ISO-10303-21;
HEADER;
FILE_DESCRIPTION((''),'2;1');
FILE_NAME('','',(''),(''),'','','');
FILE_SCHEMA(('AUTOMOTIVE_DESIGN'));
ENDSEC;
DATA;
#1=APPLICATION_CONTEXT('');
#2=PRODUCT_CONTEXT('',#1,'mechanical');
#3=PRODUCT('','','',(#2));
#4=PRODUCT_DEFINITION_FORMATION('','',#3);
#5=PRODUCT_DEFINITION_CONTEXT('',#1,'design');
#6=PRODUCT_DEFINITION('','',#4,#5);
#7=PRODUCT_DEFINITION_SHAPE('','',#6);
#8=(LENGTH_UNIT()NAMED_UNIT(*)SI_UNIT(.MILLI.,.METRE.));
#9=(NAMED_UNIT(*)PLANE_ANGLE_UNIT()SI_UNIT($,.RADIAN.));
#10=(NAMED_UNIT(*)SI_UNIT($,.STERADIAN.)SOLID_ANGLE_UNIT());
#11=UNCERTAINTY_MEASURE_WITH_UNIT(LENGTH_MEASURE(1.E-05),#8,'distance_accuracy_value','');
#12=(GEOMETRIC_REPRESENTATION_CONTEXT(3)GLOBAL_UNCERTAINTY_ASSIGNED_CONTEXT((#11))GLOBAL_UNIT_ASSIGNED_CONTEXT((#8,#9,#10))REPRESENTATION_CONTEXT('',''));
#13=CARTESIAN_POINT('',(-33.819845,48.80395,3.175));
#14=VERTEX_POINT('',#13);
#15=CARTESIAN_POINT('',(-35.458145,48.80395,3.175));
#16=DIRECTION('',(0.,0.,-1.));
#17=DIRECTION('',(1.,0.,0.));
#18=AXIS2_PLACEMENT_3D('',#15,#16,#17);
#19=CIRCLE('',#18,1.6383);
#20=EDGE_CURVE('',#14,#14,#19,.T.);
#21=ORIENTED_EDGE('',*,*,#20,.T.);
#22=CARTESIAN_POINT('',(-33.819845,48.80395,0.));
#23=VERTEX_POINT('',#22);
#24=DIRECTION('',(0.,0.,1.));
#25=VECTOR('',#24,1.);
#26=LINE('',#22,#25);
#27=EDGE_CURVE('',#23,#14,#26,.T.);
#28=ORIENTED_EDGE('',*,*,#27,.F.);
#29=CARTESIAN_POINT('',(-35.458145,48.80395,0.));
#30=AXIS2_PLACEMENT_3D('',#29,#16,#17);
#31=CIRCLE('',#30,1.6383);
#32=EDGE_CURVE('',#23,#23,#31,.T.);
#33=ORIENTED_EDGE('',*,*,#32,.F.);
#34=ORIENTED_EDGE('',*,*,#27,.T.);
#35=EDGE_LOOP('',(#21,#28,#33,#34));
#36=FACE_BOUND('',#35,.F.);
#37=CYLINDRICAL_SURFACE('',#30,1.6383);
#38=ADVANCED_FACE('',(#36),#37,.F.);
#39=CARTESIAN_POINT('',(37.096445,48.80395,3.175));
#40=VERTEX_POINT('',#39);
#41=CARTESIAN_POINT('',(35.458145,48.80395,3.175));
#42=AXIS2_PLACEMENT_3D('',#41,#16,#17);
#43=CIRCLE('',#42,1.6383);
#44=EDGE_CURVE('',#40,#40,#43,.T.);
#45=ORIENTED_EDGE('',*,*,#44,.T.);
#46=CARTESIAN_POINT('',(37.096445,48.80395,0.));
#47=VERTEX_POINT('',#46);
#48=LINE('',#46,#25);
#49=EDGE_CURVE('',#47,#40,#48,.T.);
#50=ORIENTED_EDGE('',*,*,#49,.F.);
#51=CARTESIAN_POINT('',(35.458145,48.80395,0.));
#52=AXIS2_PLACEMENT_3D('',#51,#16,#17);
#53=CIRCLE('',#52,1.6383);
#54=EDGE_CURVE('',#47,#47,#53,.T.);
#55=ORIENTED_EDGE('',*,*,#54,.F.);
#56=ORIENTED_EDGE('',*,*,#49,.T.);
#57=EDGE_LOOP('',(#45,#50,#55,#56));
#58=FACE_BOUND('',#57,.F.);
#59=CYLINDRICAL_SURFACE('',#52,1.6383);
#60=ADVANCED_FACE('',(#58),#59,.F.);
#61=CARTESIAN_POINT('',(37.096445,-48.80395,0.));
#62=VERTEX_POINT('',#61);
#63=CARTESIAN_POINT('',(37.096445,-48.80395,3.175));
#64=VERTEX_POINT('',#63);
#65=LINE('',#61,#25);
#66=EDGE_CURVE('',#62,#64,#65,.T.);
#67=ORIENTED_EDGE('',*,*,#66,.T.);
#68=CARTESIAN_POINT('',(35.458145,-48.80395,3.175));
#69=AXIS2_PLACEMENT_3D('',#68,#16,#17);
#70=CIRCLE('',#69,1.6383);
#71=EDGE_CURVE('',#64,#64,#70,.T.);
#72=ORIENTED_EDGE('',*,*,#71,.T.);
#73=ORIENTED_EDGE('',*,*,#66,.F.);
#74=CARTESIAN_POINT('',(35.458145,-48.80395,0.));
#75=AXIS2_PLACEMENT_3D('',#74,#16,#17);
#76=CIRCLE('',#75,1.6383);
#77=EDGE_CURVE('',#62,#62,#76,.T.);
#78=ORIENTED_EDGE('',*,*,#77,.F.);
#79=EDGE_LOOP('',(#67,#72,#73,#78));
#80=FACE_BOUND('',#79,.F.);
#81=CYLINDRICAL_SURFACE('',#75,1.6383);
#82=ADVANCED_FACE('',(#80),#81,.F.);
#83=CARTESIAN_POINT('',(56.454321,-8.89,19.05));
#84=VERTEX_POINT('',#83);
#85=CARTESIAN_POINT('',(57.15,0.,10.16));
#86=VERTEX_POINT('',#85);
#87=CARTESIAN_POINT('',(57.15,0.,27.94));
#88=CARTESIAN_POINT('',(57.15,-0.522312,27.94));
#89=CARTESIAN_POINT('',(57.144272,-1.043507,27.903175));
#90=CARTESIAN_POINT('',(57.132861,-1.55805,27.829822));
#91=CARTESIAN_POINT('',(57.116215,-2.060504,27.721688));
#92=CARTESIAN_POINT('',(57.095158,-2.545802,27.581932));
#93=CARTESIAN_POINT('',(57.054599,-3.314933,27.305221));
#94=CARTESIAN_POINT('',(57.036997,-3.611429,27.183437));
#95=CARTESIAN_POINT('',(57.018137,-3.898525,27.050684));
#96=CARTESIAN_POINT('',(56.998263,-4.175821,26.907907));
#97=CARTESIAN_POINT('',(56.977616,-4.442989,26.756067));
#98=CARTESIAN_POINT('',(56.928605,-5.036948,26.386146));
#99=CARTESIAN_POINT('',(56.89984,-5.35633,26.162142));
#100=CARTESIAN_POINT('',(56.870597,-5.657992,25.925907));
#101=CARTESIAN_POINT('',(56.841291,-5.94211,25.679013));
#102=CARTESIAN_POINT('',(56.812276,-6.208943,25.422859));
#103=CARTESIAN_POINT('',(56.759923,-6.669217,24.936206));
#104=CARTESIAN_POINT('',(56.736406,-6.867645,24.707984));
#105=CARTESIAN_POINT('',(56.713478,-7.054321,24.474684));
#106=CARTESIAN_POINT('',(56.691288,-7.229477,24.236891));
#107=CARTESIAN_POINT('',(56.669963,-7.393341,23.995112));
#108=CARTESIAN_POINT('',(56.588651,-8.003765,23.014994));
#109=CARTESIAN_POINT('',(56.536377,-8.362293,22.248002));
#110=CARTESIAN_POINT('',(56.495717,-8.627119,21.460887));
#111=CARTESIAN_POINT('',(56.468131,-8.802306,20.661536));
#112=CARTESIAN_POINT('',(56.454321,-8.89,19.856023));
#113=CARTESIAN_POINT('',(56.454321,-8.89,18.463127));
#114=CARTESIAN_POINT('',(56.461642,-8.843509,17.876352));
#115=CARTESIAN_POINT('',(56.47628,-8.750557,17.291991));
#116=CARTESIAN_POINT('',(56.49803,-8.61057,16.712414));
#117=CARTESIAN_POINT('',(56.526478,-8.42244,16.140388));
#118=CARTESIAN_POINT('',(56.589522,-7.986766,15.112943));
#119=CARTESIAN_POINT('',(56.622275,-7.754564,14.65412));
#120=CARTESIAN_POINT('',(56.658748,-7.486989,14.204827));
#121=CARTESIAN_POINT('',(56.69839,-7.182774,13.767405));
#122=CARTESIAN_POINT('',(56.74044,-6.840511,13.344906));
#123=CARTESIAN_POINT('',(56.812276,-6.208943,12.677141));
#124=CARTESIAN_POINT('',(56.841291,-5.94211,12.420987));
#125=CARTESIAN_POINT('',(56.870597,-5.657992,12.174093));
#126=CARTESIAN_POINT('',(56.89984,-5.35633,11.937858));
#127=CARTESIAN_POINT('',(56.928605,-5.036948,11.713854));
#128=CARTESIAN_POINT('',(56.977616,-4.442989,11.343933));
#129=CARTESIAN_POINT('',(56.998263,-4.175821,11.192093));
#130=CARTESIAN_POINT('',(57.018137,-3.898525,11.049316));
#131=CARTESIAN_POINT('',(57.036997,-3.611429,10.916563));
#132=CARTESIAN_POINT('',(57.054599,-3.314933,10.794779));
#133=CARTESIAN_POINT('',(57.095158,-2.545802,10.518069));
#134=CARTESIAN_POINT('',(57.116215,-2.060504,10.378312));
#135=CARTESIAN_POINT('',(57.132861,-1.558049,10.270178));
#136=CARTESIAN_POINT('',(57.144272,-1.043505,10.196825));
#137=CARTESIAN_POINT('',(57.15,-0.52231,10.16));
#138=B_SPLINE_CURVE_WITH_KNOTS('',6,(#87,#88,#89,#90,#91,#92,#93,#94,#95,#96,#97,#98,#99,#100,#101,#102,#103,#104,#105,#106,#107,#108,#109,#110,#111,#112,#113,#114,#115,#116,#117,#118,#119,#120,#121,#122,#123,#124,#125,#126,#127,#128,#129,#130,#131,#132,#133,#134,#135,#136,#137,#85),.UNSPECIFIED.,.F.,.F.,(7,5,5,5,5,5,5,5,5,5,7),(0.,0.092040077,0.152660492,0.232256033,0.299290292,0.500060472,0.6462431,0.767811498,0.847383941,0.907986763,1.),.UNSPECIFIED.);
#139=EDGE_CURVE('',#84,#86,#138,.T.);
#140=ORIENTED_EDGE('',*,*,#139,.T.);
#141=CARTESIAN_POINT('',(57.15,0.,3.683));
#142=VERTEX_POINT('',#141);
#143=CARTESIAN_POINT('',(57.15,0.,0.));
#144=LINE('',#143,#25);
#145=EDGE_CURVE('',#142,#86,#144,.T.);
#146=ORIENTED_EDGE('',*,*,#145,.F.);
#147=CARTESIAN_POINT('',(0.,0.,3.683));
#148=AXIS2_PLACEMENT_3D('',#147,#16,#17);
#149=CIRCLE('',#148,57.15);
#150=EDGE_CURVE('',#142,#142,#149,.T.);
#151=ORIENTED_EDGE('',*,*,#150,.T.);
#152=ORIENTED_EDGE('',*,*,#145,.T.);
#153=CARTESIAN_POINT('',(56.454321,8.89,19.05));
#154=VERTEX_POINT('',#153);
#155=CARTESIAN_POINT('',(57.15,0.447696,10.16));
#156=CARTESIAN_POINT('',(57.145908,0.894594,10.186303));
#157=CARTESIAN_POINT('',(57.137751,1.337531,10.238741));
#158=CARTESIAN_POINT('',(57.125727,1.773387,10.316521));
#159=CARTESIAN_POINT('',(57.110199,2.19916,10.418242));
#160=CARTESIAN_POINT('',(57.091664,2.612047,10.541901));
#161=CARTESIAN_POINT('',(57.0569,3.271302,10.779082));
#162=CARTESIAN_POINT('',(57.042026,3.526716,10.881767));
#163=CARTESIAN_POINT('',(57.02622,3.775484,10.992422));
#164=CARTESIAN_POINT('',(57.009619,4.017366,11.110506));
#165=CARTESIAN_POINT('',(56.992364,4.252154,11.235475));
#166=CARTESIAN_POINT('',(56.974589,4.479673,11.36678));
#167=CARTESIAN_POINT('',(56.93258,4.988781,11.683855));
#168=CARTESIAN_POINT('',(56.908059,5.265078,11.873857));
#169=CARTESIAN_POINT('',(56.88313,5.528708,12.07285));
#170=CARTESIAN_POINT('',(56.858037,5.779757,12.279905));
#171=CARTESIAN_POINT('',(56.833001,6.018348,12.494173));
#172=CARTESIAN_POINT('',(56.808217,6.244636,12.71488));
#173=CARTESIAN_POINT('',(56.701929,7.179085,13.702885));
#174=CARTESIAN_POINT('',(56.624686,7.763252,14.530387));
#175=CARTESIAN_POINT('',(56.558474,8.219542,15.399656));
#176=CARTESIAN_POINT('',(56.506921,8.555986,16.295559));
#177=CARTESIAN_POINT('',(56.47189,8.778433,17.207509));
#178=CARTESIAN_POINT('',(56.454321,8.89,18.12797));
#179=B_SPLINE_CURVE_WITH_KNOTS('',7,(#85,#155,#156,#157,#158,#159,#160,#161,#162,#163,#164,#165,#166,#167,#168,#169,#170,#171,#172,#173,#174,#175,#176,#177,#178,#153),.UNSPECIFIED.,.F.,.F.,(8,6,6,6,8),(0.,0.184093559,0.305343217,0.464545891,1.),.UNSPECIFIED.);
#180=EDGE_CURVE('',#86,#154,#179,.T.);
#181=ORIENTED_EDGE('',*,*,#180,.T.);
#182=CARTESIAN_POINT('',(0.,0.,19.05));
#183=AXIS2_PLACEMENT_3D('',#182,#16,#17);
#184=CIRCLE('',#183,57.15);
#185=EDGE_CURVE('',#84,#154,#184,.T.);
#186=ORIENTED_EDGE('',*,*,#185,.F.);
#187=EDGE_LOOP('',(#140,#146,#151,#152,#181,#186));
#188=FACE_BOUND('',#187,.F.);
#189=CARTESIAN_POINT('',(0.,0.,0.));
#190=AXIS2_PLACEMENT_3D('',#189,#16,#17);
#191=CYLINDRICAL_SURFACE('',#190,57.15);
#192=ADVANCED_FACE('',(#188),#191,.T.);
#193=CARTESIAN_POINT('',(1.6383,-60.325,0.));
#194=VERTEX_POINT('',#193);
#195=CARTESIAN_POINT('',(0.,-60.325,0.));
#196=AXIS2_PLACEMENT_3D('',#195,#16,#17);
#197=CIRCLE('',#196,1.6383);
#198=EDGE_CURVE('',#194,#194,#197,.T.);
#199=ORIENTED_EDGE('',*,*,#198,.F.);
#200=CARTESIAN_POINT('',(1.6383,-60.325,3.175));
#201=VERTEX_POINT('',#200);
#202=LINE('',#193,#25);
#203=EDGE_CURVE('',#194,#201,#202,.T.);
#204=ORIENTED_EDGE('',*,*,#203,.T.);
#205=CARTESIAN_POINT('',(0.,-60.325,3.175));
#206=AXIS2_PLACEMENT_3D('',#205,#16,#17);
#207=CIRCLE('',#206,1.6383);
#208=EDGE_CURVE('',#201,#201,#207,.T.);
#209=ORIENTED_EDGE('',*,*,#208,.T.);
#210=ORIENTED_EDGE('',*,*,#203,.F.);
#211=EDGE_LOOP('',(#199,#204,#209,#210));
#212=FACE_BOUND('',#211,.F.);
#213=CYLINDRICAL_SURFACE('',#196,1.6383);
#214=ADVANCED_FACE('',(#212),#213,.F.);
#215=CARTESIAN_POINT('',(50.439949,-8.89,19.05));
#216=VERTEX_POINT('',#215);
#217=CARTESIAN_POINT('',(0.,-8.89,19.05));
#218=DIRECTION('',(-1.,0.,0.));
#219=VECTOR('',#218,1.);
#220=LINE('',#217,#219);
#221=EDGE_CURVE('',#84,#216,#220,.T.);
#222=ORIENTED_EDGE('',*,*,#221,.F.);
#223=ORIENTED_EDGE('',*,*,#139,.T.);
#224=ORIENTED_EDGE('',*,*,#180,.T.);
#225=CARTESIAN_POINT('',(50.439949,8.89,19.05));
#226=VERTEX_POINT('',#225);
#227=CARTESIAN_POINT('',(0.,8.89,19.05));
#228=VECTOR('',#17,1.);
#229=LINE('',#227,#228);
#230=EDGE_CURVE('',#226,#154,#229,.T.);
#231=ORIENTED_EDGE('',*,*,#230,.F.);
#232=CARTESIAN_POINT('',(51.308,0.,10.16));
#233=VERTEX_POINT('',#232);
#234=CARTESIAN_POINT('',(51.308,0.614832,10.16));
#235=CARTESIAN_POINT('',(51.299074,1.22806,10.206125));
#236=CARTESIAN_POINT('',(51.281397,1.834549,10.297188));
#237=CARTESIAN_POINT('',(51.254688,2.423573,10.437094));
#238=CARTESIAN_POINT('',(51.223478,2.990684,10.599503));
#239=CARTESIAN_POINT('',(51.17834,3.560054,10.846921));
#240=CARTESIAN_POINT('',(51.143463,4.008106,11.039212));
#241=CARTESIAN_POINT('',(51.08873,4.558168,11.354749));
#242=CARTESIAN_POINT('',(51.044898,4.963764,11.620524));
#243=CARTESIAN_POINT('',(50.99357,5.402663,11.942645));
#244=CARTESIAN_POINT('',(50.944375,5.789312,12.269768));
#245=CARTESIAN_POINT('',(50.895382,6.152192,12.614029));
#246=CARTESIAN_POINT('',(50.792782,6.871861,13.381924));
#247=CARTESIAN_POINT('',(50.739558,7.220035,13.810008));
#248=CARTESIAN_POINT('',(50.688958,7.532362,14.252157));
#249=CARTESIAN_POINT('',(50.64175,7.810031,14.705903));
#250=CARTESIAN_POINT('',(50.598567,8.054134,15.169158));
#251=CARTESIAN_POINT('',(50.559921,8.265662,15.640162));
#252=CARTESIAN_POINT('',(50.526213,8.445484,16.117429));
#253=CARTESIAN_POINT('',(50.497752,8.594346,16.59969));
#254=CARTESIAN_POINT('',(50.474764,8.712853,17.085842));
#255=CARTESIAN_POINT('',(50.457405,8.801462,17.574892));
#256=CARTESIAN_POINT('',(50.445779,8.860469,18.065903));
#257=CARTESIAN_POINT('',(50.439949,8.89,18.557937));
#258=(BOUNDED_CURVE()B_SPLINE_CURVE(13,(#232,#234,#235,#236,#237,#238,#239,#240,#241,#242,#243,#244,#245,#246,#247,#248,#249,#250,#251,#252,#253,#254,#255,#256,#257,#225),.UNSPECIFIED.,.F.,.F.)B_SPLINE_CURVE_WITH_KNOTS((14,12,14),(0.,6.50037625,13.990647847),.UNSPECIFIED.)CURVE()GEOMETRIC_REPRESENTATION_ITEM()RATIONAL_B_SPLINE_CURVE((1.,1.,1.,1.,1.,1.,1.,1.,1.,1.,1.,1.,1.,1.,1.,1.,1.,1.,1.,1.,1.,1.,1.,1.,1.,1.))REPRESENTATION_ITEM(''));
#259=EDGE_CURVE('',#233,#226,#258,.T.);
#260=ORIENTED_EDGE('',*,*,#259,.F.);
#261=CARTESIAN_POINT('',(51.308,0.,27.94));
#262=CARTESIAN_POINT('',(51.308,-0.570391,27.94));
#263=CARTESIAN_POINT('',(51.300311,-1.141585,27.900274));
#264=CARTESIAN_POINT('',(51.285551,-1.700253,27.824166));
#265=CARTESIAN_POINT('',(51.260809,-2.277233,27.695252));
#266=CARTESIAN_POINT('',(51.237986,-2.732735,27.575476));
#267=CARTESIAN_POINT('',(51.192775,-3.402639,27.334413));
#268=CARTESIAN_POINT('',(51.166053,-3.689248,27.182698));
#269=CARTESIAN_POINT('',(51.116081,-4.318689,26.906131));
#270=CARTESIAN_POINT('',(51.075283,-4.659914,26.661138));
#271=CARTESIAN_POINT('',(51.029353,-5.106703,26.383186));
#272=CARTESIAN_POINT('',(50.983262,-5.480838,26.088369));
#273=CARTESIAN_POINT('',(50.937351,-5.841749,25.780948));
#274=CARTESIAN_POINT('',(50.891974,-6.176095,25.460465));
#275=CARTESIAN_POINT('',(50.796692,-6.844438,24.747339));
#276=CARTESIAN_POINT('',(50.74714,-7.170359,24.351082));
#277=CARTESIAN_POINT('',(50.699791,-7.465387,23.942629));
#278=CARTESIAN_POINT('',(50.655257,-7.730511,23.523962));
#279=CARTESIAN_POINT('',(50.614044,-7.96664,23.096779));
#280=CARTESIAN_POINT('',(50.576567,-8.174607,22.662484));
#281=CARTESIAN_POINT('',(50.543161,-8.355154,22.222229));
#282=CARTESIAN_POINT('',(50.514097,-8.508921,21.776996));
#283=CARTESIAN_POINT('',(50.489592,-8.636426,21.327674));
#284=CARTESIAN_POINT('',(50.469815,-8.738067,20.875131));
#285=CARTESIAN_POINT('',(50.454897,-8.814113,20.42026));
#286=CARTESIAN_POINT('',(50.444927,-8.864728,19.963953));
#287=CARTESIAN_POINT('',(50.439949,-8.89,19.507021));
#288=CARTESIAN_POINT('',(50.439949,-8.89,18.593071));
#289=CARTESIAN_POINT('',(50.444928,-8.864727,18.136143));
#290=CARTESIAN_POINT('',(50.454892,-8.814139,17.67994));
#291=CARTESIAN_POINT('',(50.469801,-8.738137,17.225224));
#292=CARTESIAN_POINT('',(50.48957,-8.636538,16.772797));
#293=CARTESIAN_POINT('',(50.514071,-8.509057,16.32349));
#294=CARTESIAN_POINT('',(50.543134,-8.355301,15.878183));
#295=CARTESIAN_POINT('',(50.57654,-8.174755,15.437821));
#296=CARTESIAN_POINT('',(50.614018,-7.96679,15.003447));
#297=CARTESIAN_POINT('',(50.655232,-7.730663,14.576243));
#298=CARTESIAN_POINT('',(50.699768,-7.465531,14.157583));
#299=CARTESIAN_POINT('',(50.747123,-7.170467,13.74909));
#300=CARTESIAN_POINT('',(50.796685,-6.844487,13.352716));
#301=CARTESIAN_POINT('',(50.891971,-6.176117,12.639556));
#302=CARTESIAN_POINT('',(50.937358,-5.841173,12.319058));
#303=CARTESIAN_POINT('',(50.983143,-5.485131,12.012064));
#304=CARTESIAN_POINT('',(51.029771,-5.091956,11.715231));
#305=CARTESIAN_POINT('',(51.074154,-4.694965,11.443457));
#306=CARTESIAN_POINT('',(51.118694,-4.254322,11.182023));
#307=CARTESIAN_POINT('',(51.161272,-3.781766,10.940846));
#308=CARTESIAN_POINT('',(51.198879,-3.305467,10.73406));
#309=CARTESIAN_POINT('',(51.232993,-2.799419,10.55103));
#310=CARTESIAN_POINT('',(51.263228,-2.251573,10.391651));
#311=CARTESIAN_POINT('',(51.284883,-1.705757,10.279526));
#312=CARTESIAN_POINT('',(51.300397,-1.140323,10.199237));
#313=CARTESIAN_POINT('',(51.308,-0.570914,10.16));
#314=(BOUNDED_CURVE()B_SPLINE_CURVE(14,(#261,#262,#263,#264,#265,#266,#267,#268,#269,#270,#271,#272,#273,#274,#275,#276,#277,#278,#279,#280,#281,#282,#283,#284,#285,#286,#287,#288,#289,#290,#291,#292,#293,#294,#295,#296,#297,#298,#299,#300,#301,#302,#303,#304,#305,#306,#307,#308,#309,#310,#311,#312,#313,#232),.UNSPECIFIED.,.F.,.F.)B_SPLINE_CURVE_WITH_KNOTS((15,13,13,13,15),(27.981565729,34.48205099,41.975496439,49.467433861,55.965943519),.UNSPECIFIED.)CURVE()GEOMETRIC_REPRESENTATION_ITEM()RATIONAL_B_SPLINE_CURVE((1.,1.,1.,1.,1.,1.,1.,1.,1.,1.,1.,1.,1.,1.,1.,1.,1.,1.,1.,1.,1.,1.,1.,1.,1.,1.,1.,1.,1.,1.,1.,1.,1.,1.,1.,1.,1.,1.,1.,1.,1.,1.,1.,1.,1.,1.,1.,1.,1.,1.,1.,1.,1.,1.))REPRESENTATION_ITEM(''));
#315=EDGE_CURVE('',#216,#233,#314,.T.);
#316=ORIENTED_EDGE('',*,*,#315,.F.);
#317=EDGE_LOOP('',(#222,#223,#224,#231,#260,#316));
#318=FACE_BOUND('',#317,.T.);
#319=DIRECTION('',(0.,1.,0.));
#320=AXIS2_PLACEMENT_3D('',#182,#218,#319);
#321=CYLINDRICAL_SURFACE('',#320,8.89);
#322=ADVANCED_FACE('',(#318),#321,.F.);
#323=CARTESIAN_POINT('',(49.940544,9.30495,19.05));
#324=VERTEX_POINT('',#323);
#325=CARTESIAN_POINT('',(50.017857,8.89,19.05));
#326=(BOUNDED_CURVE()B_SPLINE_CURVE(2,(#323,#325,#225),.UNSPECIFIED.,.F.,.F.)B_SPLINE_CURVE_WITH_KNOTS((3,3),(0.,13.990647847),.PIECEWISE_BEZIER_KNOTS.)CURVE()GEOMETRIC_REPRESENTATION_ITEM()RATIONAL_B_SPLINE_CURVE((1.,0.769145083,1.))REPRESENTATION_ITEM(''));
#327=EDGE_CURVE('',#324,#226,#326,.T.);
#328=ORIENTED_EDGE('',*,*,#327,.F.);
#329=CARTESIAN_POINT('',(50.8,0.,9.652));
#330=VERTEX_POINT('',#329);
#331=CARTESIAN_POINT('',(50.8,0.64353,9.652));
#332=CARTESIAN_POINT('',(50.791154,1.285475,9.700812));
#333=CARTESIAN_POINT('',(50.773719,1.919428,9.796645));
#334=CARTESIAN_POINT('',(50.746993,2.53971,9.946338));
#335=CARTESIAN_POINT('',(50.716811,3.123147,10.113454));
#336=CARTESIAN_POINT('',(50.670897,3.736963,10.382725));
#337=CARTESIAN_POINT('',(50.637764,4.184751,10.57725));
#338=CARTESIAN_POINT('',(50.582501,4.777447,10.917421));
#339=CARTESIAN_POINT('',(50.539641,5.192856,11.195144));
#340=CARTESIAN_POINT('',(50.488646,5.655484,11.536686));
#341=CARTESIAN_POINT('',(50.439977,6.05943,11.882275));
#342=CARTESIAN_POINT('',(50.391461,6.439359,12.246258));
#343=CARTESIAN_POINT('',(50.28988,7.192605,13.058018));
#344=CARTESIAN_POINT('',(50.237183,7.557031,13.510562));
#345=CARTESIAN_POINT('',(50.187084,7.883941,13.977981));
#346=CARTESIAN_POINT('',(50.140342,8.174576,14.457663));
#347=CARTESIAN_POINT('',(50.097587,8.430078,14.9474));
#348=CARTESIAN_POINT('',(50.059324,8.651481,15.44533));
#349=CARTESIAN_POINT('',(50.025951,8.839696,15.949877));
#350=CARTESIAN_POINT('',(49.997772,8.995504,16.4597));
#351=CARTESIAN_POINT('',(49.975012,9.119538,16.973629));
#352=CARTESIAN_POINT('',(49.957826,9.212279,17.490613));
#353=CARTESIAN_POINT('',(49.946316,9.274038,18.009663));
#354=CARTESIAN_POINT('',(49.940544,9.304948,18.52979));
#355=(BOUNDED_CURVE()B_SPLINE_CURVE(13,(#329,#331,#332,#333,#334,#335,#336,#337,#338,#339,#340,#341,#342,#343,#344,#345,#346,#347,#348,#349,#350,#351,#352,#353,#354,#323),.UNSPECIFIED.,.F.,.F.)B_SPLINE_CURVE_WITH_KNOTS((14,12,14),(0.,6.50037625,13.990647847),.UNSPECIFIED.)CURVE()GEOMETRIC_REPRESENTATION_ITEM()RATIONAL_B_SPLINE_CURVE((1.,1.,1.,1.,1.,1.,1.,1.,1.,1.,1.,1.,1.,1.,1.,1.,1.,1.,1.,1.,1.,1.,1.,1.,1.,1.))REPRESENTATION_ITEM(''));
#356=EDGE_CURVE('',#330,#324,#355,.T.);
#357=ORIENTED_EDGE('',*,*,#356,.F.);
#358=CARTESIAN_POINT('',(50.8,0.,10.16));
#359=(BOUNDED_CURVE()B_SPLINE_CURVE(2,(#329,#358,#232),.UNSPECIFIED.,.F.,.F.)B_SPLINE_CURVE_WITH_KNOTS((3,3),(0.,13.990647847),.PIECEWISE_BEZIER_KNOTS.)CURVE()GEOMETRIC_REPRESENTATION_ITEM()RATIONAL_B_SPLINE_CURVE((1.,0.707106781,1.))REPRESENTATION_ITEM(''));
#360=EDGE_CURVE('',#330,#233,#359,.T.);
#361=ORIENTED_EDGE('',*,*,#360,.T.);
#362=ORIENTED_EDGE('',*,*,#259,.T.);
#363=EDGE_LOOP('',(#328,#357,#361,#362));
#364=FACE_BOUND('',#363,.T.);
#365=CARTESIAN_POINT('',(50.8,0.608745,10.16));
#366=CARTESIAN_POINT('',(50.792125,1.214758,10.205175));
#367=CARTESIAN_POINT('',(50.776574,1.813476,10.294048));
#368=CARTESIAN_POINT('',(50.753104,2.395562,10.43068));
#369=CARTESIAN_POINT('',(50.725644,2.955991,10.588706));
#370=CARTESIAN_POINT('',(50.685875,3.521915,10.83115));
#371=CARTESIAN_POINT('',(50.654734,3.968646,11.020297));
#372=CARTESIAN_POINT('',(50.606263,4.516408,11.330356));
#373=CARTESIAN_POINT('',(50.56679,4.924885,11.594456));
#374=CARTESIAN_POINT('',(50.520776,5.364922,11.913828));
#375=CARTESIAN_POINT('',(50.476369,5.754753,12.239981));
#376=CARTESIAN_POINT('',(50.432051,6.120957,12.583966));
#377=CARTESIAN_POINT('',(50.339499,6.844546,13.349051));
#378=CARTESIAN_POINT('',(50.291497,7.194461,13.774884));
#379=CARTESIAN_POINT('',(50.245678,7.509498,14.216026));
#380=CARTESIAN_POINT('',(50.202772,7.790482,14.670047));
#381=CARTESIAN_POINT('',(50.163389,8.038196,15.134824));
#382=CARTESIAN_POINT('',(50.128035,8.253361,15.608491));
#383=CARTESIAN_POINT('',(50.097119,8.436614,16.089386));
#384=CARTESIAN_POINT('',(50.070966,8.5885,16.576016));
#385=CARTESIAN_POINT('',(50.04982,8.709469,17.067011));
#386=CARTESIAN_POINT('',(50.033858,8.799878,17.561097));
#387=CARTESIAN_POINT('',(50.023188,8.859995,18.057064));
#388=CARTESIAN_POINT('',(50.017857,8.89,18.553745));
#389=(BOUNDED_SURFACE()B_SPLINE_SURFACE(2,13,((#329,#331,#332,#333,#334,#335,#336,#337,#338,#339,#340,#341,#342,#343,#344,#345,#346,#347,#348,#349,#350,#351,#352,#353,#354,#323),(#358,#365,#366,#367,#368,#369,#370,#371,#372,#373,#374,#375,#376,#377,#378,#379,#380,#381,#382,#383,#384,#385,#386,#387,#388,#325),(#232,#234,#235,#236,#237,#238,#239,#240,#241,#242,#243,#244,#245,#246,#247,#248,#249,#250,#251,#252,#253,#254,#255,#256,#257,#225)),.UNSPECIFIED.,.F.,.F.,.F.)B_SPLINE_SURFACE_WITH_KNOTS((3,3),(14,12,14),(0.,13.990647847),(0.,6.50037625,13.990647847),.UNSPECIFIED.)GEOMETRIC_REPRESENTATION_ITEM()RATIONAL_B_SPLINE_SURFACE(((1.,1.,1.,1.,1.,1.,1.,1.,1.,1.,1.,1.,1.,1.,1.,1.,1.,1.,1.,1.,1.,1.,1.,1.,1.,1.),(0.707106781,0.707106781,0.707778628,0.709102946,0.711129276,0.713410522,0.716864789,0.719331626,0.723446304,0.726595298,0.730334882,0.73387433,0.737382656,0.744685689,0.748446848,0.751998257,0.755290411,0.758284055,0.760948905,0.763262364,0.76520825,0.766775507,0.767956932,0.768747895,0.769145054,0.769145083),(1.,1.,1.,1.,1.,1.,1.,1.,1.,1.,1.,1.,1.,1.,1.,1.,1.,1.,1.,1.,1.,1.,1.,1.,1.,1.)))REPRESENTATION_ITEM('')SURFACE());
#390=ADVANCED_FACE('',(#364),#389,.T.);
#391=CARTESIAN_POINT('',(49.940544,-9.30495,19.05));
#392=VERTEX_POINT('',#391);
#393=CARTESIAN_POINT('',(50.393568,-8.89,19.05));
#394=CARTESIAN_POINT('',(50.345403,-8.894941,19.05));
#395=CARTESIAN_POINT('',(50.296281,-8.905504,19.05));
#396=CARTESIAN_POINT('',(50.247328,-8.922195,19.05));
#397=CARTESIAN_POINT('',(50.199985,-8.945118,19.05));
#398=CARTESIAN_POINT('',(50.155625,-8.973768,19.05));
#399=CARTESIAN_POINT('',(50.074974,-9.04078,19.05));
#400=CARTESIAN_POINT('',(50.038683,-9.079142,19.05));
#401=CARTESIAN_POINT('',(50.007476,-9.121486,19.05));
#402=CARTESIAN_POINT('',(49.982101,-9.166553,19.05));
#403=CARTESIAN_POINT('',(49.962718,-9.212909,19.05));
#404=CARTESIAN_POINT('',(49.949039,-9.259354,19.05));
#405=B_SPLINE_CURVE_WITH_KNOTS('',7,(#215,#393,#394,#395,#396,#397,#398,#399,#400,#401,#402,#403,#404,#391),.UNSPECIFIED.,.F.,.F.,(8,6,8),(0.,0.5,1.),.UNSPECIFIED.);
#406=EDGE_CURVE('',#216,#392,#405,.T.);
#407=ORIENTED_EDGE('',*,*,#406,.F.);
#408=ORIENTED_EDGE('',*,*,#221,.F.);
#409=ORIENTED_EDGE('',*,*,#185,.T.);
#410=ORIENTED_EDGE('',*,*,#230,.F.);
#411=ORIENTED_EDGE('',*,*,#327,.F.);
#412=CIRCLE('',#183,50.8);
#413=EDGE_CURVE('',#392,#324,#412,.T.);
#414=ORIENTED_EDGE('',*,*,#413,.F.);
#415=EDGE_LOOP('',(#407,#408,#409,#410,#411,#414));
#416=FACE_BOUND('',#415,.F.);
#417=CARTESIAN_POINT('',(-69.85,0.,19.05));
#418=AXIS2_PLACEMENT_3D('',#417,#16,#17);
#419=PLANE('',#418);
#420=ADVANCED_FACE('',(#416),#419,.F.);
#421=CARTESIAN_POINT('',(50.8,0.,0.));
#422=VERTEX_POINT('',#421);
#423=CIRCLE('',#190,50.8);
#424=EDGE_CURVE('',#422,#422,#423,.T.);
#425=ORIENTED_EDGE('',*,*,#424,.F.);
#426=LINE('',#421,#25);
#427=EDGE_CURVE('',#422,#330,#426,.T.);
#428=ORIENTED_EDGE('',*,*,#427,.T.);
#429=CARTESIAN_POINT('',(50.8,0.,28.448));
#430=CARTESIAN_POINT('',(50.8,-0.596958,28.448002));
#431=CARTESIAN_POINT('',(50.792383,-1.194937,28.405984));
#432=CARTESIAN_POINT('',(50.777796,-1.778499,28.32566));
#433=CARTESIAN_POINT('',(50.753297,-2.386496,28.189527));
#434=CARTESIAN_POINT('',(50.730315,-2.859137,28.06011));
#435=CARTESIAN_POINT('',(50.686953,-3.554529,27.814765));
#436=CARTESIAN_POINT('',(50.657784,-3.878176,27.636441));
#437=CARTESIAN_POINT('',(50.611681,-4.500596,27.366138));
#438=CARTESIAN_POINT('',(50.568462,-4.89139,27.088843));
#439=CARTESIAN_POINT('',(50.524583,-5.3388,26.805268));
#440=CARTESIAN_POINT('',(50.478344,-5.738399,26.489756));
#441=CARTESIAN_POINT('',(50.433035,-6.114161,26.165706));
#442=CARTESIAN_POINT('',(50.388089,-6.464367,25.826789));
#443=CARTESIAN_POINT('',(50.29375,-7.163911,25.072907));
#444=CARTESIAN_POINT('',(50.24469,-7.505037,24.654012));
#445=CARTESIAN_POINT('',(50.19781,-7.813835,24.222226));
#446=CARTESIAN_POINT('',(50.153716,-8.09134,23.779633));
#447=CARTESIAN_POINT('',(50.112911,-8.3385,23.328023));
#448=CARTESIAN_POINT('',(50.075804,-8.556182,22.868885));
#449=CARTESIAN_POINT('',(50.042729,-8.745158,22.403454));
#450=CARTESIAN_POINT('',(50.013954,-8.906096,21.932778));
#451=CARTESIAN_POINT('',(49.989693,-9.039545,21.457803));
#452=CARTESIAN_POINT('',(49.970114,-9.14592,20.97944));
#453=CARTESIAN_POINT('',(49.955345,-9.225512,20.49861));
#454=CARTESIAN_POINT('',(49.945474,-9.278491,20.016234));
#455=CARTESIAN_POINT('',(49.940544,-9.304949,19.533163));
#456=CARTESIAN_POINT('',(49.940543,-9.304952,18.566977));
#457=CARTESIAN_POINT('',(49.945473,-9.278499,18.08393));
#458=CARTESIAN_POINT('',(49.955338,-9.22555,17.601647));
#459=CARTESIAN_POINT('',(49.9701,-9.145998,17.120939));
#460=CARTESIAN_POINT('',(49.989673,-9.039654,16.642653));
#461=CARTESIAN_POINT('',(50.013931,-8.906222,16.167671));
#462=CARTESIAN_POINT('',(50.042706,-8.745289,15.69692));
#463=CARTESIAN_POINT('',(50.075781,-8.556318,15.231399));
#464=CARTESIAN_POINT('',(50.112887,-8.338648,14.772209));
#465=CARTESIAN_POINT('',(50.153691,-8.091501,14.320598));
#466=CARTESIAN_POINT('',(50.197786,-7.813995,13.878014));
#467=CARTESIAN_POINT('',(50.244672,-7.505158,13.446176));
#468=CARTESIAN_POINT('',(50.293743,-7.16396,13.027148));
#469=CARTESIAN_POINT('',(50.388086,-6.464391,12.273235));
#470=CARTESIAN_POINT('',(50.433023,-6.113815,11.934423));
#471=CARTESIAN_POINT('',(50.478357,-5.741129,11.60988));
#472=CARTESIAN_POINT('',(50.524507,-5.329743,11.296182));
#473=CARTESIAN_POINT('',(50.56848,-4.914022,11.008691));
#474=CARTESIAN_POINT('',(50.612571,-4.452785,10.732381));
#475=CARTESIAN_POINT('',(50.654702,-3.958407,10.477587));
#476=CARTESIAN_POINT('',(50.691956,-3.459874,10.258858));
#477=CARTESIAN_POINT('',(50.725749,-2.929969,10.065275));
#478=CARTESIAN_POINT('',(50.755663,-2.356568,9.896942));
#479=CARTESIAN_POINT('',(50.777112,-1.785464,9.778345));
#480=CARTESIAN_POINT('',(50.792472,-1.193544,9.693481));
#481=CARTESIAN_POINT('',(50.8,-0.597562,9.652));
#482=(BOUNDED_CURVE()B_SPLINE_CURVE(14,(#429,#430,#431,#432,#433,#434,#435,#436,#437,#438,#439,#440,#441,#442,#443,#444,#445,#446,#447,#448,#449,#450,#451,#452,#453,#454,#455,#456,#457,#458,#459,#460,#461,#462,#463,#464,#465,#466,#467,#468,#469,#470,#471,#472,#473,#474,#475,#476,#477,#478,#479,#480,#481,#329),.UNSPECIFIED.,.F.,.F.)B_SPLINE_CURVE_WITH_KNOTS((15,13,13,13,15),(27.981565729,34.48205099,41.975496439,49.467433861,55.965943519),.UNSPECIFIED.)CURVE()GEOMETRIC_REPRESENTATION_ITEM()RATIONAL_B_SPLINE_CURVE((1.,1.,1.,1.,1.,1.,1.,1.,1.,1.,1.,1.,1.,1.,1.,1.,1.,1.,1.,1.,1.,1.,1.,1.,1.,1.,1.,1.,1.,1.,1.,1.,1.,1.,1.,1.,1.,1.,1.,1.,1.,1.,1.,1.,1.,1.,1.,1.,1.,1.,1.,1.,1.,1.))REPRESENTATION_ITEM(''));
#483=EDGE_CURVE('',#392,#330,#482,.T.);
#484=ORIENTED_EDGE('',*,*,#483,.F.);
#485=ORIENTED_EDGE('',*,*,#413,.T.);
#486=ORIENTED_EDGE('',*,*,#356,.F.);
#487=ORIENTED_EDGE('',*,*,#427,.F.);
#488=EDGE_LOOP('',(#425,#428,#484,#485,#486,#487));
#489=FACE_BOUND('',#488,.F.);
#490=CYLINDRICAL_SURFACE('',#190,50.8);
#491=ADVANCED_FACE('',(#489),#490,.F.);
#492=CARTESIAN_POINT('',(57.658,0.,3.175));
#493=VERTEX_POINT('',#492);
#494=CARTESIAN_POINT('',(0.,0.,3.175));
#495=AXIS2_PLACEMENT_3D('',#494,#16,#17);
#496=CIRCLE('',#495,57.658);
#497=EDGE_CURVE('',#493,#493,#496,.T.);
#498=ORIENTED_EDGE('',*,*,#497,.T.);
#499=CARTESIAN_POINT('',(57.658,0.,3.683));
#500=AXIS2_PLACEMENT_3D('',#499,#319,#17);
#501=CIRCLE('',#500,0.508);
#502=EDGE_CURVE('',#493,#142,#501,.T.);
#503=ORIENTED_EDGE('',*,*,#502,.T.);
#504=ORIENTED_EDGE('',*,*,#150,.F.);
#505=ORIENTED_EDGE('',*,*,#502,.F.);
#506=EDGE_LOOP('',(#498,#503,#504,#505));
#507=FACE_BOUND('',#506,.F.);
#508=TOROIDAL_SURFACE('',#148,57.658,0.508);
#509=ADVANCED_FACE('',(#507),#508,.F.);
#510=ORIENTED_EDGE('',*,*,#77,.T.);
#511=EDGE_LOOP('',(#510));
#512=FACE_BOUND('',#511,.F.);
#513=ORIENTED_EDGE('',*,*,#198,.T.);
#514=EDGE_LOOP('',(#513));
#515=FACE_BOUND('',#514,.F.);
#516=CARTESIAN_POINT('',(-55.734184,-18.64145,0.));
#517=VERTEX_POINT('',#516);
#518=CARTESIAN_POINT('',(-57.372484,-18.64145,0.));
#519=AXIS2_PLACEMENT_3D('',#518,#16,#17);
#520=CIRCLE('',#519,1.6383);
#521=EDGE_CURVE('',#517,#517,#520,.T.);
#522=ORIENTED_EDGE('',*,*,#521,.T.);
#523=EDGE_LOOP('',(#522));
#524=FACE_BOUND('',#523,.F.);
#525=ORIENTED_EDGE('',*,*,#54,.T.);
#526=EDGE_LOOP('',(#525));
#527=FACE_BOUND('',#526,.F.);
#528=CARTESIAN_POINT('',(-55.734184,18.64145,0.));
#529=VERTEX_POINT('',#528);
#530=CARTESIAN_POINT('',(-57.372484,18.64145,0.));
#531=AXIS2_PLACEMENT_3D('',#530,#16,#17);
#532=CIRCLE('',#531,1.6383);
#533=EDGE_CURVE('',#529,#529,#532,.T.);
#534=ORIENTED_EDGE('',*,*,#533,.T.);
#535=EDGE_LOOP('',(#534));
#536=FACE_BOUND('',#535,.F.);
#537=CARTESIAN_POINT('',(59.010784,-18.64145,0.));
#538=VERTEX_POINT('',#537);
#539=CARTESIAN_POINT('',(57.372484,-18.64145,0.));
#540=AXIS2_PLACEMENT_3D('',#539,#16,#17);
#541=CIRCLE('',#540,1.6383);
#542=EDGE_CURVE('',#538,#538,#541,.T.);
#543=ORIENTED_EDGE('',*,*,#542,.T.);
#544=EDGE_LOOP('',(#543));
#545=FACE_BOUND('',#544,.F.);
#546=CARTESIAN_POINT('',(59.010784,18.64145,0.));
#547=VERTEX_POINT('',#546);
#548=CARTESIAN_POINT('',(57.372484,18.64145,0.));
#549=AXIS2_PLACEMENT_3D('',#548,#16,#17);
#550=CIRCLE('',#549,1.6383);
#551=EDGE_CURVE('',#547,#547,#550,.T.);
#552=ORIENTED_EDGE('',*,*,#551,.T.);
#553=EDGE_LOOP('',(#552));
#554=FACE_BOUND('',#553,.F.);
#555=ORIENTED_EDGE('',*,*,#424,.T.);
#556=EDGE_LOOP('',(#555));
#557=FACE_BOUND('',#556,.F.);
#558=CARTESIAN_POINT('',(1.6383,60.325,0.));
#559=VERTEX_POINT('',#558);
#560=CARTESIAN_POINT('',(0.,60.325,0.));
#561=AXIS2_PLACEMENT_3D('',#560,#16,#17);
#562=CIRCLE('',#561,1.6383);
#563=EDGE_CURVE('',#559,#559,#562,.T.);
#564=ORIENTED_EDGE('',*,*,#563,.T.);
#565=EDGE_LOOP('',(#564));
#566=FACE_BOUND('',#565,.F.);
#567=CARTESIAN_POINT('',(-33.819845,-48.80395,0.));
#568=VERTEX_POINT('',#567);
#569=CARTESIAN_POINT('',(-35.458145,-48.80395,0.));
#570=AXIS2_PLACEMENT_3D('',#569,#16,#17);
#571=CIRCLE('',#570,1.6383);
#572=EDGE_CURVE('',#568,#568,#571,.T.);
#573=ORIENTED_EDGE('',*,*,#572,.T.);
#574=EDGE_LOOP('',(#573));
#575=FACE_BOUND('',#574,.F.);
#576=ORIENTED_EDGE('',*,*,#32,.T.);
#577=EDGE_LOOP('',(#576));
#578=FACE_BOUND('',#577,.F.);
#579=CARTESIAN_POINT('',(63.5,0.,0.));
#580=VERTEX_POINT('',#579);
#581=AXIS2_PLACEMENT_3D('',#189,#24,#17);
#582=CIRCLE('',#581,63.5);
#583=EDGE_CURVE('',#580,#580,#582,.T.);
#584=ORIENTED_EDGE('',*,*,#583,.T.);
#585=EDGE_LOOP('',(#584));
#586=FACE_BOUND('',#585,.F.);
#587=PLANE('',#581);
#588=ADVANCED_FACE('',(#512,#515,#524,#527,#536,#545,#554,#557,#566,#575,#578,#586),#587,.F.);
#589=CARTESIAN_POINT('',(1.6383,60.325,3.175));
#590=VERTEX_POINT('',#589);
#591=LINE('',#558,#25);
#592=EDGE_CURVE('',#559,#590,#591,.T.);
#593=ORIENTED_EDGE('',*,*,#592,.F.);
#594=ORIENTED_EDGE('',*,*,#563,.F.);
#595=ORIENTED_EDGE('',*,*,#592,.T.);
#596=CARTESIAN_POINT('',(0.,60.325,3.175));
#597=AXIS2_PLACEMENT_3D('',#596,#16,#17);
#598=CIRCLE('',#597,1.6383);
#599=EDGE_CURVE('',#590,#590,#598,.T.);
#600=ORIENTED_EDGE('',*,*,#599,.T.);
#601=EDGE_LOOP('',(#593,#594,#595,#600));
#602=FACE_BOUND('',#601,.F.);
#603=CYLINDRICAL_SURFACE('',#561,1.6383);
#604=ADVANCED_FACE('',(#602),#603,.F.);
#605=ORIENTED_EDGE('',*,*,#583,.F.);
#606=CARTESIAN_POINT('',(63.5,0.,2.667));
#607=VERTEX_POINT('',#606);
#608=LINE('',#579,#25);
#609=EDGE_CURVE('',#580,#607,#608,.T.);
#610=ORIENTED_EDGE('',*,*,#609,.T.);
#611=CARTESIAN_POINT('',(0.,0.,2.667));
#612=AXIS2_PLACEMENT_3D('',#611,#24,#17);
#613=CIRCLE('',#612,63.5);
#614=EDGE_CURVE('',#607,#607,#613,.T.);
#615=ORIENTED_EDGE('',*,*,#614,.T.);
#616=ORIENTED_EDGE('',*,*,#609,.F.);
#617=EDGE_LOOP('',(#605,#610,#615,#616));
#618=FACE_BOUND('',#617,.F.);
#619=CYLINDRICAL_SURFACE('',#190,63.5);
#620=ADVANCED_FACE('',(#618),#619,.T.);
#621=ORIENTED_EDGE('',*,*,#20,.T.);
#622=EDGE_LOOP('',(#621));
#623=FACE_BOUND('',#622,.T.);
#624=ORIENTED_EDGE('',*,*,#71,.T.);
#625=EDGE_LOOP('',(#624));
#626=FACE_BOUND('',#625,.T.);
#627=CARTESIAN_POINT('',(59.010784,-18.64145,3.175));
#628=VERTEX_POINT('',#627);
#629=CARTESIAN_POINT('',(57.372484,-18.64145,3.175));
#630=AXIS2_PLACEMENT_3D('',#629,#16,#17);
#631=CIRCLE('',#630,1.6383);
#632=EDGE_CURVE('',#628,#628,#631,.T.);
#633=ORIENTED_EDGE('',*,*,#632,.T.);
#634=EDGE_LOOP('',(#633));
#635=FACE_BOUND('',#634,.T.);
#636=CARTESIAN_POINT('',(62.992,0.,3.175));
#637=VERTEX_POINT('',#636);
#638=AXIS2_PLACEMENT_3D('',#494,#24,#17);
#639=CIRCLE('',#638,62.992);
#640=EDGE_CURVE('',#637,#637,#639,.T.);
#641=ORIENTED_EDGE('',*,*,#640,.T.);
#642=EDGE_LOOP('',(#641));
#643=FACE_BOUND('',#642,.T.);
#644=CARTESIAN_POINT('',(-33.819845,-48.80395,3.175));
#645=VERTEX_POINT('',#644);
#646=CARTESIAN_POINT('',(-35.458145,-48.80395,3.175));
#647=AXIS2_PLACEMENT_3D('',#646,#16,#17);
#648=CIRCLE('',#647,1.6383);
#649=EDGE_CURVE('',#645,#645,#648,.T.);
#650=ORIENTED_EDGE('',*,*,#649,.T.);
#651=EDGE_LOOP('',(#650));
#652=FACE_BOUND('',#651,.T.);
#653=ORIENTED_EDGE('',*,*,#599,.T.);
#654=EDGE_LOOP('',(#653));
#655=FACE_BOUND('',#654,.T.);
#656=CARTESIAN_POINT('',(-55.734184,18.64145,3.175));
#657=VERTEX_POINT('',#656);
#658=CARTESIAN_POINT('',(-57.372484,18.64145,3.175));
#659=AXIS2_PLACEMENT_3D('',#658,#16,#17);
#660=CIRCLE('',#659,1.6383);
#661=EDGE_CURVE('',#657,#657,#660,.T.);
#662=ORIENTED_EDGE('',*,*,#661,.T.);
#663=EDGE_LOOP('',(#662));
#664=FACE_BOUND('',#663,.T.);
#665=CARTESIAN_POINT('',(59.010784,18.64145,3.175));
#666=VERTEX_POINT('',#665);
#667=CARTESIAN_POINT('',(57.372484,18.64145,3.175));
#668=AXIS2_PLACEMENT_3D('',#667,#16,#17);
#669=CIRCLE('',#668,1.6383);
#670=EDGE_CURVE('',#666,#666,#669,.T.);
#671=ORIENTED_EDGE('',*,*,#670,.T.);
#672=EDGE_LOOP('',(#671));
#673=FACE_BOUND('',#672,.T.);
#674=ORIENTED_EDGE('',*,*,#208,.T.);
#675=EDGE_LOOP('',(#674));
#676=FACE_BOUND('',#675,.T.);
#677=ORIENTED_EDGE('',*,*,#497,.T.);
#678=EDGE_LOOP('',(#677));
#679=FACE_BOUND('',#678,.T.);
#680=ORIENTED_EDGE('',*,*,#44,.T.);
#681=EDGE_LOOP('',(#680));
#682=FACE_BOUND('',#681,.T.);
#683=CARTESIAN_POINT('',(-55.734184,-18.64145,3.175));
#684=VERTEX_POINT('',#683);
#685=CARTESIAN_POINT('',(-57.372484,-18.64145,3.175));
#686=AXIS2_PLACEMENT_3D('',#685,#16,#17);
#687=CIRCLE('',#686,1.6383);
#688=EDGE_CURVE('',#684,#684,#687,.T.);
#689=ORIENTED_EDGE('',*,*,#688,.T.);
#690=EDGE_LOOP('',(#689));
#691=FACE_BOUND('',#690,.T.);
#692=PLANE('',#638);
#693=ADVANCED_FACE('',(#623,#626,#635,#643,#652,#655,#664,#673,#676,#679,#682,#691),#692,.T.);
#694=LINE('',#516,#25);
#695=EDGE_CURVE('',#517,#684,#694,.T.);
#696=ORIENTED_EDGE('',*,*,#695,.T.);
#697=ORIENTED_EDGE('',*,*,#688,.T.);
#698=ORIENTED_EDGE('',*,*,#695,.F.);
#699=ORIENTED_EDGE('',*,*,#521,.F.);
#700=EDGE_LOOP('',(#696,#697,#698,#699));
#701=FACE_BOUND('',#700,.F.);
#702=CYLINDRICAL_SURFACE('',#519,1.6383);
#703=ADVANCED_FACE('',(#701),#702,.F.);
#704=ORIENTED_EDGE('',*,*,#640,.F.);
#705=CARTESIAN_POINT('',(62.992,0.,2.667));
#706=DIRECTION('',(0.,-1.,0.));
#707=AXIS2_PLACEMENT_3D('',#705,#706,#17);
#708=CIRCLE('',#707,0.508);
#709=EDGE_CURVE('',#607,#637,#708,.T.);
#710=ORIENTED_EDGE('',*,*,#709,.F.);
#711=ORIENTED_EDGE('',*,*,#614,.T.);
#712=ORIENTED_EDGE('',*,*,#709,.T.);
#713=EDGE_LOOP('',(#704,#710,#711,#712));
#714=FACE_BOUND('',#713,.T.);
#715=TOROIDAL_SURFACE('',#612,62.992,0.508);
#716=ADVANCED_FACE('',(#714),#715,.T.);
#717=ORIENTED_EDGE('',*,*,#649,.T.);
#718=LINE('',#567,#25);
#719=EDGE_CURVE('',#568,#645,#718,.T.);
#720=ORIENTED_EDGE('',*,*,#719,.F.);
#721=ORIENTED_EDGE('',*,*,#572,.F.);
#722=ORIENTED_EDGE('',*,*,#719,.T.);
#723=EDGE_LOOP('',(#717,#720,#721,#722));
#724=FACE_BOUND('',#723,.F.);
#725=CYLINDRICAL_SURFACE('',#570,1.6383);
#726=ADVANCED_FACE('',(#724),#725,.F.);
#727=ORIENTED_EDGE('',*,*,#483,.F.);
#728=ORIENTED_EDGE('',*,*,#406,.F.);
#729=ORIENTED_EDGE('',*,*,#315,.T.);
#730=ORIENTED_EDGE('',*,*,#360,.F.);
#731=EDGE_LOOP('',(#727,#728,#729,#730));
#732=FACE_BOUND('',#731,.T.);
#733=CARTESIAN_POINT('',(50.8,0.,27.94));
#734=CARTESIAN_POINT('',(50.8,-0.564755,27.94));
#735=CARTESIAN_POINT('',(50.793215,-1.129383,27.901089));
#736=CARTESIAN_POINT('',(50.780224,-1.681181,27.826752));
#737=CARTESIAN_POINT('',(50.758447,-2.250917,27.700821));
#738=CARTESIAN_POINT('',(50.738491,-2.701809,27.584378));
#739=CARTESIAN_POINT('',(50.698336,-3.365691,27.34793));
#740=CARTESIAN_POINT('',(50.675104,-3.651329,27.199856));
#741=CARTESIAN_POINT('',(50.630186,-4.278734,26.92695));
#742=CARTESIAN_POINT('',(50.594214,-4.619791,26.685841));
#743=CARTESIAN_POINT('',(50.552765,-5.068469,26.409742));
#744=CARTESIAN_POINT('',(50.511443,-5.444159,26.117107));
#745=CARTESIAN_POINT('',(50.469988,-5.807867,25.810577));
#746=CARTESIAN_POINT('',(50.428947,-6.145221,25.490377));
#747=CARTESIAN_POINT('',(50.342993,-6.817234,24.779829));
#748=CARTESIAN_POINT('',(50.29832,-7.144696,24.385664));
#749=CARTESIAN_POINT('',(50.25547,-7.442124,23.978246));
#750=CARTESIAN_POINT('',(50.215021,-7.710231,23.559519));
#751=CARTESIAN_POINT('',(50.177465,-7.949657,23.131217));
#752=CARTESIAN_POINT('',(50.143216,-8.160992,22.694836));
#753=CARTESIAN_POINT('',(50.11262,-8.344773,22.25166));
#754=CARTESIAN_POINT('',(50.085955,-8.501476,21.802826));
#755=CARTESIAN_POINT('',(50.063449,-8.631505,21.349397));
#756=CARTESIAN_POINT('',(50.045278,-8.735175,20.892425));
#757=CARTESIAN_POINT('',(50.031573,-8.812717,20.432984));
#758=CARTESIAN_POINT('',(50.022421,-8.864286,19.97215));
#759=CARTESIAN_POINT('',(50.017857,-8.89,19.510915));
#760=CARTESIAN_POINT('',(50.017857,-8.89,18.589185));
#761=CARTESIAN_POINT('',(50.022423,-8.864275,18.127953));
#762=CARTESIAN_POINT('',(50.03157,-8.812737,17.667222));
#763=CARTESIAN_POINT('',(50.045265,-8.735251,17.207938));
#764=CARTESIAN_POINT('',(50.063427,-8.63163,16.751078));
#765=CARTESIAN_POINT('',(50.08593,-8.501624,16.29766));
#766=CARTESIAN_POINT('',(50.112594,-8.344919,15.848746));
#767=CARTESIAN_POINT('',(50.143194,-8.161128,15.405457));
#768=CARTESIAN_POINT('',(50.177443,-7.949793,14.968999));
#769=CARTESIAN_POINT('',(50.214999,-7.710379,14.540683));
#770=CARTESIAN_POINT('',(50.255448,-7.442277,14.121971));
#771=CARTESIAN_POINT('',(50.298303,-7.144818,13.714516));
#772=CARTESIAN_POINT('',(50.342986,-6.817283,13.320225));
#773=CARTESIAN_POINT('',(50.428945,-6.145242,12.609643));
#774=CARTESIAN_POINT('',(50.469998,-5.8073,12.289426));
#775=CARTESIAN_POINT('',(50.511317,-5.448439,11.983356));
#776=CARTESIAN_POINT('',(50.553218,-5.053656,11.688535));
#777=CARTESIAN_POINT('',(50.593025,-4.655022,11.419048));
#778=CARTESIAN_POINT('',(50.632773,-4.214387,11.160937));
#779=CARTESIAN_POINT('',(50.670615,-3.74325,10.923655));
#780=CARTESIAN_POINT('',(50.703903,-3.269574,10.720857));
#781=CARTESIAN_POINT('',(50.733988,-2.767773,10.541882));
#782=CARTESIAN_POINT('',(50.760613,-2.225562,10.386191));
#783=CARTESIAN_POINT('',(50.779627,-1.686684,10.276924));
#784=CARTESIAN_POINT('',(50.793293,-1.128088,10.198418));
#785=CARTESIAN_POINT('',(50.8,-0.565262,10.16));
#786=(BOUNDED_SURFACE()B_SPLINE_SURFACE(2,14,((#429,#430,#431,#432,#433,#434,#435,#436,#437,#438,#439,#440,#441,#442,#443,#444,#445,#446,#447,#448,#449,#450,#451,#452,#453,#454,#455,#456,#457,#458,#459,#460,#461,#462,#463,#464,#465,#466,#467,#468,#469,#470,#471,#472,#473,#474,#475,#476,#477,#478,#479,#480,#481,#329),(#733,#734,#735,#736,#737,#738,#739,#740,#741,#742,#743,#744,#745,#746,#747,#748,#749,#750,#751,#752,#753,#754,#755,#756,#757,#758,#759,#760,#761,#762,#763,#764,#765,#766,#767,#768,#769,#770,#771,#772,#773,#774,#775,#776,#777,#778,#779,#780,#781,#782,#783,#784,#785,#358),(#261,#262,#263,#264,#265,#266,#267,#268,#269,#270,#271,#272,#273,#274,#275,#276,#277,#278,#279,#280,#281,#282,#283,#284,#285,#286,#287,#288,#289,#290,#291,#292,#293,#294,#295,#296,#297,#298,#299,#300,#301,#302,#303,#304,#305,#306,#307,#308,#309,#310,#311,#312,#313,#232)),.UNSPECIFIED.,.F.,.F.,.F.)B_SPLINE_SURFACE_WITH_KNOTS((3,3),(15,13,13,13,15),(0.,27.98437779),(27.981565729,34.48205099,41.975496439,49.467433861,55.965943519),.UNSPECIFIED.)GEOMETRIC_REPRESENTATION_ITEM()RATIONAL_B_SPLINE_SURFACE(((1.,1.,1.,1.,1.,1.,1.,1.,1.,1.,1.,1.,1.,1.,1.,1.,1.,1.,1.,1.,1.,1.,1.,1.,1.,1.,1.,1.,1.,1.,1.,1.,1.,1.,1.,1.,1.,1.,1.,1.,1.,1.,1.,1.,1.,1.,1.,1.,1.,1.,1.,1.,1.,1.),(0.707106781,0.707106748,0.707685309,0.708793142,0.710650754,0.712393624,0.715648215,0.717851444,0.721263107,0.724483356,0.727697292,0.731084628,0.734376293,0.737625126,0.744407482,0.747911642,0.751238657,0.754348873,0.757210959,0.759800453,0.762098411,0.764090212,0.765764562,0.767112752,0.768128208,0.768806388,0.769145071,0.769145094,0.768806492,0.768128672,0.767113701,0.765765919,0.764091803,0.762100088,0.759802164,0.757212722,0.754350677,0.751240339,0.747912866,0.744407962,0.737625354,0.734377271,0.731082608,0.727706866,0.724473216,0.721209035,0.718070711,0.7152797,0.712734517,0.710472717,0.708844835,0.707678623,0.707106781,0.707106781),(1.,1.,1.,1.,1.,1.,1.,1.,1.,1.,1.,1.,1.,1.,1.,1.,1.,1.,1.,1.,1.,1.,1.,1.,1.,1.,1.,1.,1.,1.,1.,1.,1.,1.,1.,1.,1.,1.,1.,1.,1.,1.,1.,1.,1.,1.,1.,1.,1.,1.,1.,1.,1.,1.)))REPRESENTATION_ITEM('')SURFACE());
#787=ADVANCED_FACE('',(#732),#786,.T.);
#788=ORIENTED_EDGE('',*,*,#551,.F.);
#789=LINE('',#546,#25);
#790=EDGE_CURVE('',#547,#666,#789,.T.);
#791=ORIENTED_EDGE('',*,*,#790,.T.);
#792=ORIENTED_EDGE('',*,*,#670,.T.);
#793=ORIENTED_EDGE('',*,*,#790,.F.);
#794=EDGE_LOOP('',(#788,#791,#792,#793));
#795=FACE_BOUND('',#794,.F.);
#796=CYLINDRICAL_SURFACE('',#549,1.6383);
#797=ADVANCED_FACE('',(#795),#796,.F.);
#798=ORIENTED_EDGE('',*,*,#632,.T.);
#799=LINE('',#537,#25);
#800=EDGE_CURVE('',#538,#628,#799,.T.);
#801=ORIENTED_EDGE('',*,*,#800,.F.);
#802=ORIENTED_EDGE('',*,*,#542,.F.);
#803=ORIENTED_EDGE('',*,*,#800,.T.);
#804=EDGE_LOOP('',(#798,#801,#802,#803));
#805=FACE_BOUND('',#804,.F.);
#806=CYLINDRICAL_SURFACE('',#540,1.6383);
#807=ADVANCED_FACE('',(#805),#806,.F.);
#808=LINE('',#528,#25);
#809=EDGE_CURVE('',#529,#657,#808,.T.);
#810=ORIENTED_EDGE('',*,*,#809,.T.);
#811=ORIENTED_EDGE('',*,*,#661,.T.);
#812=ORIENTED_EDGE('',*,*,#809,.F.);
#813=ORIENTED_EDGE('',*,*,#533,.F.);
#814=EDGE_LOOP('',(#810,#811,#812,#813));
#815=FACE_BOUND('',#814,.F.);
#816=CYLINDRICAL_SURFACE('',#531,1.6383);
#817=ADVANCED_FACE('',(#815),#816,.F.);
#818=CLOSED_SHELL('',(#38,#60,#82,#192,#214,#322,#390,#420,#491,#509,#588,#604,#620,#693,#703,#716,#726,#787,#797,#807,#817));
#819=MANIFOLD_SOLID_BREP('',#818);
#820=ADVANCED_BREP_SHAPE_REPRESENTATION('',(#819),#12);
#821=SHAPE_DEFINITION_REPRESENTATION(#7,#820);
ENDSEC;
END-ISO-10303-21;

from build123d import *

# Parameters (mm, degrees)
F0_R      = 63.5
F1_DEPTH  = 3.175
F2_R      = 57.15
F3_DEPTH  = 58.7375
F4_R      = 50.8
F5_DEPTH  = 50.8
F6_R      = 1.6383
F7_DEPTH  = 3.175
F8_R      = 1.1303
F9_DEPTH  = 5.55625
F10_R     = 8.89
F11_REACH = 88.645717139
F12_R     = 0.508
F13_W     = 139.7
F13_H     = 50.8
F14_DEPTH = 63.5


with BuildPart() as f1:
    # F0 (on Top) → F1 (new body)
    with BuildSketch(Plane.XY):
        Circle(F0_R)
    extrude(amount=F1_DEPTH)

    # F2 (on Top) → F3 (join)
    with BuildSketch(Plane.XY):
        Circle(F2_R)
    extrude(amount=F3_DEPTH)

    # F4 (on face) → F5 (cut)
    with BuildSketch(Plane(origin=(0, 0, 0), x_dir=(1, 0, 0), z_dir=(0, 0, -1))):
        Circle(F4_R)
    extrude(amount=-F5_DEPTH, mode=Mode.SUBTRACT)

    # F6 (on face) → F7 (cut, through all)
    with BuildSketch(Plane(origin=(0, 0, 0), x_dir=(1, 0, 0), z_dir=(0, 0, -1))):
        with Locations((0, -60.325)):
            Circle(F6_R)
        with Locations((35.4581453445, -48.8039501857)):
            Circle(F6_R)
        with Locations((57.3724843455, -18.6414501857)):
            Circle(F6_R)
        with Locations((57.3724843455, 18.6414501857)):
            Circle(F6_R)
        with Locations((35.4581453445, 48.8039501857)):
            Circle(F6_R)
        with Locations((0, 60.325)):
            Circle(F6_R)
        with Locations((-35.4581453445, 48.8039501857)):
            Circle(F6_R)
        with Locations((-57.3724843455, 18.6414501857)):
            Circle(F6_R)
        with Locations((-57.3724843455, -18.6414501857)):
            Circle(F6_R)
        with Locations((-35.4581453445, -48.8039501857)):
            Circle(F6_R)
    extrude(amount=-F7_DEPTH, mode=Mode.SUBTRACT)

    # F8 (on face) → F9 (cut)
    with BuildSketch(Plane(origin=(0, 0, 50.8), x_dir=(1, 0, 0), z_dir=(0, 0, -1))):
        with Locations((31.115, -31.115)):
            Circle(F8_R)
        with Locations((-31.115, -31.115)):
            Circle(F8_R)
        with Locations((-31.115, 31.115)):
            Circle(F8_R)
        with Locations((31.115, 31.115)):
            Circle(F8_R)
        with Locations((31.115, 0)):
            Circle(F8_R)
        with Locations((-31.115, 0)):
            Circle(F8_R)
    extrude(amount=-F9_DEPTH, mode=Mode.SUBTRACT)

    f11_end = f1.faces().sort_by_distance((-57.15, 0, 30.95625))[0]
    # F10 (on Right) → F11 (cut, up to a face of the model that its end follows)
    with BuildSketch(Plane.YZ):
        with Locations((0, 19.05)):
            Circle(F10_R)
    f11_long = extrude(amount=F11_REACH, mode=Mode.PRIVATE)
    add(split(f11_long, bisect_by=f11_end, keep=Keep.BOTTOM, mode=Mode.PRIVATE), mode=Mode.SUBTRACT)

    # F12
    f12_edges = [f1.edges().sort_by_distance(p)[0] for p in [
        (-57.15, 0, 58.7375),
        (-63.5, 0, 3.175),
        (-57.15, 0, 3.175),
        (50.345599, 6.779427, 13.29922),
        (50.016076, -8.89, 19.051457),
    ]]
    fillet(f12_edges, radius=F12_R)

    # F13 (on Front) → F14 (cut, symmetric)
    with BuildSketch(Plane.XZ):
        with Locations((0, 44.45)):
            Rectangle(F13_W, F13_H)
    extrude(amount=F14_DEPTH, both=True, mode=Mode.SUBTRACT)


solid = f1.part
